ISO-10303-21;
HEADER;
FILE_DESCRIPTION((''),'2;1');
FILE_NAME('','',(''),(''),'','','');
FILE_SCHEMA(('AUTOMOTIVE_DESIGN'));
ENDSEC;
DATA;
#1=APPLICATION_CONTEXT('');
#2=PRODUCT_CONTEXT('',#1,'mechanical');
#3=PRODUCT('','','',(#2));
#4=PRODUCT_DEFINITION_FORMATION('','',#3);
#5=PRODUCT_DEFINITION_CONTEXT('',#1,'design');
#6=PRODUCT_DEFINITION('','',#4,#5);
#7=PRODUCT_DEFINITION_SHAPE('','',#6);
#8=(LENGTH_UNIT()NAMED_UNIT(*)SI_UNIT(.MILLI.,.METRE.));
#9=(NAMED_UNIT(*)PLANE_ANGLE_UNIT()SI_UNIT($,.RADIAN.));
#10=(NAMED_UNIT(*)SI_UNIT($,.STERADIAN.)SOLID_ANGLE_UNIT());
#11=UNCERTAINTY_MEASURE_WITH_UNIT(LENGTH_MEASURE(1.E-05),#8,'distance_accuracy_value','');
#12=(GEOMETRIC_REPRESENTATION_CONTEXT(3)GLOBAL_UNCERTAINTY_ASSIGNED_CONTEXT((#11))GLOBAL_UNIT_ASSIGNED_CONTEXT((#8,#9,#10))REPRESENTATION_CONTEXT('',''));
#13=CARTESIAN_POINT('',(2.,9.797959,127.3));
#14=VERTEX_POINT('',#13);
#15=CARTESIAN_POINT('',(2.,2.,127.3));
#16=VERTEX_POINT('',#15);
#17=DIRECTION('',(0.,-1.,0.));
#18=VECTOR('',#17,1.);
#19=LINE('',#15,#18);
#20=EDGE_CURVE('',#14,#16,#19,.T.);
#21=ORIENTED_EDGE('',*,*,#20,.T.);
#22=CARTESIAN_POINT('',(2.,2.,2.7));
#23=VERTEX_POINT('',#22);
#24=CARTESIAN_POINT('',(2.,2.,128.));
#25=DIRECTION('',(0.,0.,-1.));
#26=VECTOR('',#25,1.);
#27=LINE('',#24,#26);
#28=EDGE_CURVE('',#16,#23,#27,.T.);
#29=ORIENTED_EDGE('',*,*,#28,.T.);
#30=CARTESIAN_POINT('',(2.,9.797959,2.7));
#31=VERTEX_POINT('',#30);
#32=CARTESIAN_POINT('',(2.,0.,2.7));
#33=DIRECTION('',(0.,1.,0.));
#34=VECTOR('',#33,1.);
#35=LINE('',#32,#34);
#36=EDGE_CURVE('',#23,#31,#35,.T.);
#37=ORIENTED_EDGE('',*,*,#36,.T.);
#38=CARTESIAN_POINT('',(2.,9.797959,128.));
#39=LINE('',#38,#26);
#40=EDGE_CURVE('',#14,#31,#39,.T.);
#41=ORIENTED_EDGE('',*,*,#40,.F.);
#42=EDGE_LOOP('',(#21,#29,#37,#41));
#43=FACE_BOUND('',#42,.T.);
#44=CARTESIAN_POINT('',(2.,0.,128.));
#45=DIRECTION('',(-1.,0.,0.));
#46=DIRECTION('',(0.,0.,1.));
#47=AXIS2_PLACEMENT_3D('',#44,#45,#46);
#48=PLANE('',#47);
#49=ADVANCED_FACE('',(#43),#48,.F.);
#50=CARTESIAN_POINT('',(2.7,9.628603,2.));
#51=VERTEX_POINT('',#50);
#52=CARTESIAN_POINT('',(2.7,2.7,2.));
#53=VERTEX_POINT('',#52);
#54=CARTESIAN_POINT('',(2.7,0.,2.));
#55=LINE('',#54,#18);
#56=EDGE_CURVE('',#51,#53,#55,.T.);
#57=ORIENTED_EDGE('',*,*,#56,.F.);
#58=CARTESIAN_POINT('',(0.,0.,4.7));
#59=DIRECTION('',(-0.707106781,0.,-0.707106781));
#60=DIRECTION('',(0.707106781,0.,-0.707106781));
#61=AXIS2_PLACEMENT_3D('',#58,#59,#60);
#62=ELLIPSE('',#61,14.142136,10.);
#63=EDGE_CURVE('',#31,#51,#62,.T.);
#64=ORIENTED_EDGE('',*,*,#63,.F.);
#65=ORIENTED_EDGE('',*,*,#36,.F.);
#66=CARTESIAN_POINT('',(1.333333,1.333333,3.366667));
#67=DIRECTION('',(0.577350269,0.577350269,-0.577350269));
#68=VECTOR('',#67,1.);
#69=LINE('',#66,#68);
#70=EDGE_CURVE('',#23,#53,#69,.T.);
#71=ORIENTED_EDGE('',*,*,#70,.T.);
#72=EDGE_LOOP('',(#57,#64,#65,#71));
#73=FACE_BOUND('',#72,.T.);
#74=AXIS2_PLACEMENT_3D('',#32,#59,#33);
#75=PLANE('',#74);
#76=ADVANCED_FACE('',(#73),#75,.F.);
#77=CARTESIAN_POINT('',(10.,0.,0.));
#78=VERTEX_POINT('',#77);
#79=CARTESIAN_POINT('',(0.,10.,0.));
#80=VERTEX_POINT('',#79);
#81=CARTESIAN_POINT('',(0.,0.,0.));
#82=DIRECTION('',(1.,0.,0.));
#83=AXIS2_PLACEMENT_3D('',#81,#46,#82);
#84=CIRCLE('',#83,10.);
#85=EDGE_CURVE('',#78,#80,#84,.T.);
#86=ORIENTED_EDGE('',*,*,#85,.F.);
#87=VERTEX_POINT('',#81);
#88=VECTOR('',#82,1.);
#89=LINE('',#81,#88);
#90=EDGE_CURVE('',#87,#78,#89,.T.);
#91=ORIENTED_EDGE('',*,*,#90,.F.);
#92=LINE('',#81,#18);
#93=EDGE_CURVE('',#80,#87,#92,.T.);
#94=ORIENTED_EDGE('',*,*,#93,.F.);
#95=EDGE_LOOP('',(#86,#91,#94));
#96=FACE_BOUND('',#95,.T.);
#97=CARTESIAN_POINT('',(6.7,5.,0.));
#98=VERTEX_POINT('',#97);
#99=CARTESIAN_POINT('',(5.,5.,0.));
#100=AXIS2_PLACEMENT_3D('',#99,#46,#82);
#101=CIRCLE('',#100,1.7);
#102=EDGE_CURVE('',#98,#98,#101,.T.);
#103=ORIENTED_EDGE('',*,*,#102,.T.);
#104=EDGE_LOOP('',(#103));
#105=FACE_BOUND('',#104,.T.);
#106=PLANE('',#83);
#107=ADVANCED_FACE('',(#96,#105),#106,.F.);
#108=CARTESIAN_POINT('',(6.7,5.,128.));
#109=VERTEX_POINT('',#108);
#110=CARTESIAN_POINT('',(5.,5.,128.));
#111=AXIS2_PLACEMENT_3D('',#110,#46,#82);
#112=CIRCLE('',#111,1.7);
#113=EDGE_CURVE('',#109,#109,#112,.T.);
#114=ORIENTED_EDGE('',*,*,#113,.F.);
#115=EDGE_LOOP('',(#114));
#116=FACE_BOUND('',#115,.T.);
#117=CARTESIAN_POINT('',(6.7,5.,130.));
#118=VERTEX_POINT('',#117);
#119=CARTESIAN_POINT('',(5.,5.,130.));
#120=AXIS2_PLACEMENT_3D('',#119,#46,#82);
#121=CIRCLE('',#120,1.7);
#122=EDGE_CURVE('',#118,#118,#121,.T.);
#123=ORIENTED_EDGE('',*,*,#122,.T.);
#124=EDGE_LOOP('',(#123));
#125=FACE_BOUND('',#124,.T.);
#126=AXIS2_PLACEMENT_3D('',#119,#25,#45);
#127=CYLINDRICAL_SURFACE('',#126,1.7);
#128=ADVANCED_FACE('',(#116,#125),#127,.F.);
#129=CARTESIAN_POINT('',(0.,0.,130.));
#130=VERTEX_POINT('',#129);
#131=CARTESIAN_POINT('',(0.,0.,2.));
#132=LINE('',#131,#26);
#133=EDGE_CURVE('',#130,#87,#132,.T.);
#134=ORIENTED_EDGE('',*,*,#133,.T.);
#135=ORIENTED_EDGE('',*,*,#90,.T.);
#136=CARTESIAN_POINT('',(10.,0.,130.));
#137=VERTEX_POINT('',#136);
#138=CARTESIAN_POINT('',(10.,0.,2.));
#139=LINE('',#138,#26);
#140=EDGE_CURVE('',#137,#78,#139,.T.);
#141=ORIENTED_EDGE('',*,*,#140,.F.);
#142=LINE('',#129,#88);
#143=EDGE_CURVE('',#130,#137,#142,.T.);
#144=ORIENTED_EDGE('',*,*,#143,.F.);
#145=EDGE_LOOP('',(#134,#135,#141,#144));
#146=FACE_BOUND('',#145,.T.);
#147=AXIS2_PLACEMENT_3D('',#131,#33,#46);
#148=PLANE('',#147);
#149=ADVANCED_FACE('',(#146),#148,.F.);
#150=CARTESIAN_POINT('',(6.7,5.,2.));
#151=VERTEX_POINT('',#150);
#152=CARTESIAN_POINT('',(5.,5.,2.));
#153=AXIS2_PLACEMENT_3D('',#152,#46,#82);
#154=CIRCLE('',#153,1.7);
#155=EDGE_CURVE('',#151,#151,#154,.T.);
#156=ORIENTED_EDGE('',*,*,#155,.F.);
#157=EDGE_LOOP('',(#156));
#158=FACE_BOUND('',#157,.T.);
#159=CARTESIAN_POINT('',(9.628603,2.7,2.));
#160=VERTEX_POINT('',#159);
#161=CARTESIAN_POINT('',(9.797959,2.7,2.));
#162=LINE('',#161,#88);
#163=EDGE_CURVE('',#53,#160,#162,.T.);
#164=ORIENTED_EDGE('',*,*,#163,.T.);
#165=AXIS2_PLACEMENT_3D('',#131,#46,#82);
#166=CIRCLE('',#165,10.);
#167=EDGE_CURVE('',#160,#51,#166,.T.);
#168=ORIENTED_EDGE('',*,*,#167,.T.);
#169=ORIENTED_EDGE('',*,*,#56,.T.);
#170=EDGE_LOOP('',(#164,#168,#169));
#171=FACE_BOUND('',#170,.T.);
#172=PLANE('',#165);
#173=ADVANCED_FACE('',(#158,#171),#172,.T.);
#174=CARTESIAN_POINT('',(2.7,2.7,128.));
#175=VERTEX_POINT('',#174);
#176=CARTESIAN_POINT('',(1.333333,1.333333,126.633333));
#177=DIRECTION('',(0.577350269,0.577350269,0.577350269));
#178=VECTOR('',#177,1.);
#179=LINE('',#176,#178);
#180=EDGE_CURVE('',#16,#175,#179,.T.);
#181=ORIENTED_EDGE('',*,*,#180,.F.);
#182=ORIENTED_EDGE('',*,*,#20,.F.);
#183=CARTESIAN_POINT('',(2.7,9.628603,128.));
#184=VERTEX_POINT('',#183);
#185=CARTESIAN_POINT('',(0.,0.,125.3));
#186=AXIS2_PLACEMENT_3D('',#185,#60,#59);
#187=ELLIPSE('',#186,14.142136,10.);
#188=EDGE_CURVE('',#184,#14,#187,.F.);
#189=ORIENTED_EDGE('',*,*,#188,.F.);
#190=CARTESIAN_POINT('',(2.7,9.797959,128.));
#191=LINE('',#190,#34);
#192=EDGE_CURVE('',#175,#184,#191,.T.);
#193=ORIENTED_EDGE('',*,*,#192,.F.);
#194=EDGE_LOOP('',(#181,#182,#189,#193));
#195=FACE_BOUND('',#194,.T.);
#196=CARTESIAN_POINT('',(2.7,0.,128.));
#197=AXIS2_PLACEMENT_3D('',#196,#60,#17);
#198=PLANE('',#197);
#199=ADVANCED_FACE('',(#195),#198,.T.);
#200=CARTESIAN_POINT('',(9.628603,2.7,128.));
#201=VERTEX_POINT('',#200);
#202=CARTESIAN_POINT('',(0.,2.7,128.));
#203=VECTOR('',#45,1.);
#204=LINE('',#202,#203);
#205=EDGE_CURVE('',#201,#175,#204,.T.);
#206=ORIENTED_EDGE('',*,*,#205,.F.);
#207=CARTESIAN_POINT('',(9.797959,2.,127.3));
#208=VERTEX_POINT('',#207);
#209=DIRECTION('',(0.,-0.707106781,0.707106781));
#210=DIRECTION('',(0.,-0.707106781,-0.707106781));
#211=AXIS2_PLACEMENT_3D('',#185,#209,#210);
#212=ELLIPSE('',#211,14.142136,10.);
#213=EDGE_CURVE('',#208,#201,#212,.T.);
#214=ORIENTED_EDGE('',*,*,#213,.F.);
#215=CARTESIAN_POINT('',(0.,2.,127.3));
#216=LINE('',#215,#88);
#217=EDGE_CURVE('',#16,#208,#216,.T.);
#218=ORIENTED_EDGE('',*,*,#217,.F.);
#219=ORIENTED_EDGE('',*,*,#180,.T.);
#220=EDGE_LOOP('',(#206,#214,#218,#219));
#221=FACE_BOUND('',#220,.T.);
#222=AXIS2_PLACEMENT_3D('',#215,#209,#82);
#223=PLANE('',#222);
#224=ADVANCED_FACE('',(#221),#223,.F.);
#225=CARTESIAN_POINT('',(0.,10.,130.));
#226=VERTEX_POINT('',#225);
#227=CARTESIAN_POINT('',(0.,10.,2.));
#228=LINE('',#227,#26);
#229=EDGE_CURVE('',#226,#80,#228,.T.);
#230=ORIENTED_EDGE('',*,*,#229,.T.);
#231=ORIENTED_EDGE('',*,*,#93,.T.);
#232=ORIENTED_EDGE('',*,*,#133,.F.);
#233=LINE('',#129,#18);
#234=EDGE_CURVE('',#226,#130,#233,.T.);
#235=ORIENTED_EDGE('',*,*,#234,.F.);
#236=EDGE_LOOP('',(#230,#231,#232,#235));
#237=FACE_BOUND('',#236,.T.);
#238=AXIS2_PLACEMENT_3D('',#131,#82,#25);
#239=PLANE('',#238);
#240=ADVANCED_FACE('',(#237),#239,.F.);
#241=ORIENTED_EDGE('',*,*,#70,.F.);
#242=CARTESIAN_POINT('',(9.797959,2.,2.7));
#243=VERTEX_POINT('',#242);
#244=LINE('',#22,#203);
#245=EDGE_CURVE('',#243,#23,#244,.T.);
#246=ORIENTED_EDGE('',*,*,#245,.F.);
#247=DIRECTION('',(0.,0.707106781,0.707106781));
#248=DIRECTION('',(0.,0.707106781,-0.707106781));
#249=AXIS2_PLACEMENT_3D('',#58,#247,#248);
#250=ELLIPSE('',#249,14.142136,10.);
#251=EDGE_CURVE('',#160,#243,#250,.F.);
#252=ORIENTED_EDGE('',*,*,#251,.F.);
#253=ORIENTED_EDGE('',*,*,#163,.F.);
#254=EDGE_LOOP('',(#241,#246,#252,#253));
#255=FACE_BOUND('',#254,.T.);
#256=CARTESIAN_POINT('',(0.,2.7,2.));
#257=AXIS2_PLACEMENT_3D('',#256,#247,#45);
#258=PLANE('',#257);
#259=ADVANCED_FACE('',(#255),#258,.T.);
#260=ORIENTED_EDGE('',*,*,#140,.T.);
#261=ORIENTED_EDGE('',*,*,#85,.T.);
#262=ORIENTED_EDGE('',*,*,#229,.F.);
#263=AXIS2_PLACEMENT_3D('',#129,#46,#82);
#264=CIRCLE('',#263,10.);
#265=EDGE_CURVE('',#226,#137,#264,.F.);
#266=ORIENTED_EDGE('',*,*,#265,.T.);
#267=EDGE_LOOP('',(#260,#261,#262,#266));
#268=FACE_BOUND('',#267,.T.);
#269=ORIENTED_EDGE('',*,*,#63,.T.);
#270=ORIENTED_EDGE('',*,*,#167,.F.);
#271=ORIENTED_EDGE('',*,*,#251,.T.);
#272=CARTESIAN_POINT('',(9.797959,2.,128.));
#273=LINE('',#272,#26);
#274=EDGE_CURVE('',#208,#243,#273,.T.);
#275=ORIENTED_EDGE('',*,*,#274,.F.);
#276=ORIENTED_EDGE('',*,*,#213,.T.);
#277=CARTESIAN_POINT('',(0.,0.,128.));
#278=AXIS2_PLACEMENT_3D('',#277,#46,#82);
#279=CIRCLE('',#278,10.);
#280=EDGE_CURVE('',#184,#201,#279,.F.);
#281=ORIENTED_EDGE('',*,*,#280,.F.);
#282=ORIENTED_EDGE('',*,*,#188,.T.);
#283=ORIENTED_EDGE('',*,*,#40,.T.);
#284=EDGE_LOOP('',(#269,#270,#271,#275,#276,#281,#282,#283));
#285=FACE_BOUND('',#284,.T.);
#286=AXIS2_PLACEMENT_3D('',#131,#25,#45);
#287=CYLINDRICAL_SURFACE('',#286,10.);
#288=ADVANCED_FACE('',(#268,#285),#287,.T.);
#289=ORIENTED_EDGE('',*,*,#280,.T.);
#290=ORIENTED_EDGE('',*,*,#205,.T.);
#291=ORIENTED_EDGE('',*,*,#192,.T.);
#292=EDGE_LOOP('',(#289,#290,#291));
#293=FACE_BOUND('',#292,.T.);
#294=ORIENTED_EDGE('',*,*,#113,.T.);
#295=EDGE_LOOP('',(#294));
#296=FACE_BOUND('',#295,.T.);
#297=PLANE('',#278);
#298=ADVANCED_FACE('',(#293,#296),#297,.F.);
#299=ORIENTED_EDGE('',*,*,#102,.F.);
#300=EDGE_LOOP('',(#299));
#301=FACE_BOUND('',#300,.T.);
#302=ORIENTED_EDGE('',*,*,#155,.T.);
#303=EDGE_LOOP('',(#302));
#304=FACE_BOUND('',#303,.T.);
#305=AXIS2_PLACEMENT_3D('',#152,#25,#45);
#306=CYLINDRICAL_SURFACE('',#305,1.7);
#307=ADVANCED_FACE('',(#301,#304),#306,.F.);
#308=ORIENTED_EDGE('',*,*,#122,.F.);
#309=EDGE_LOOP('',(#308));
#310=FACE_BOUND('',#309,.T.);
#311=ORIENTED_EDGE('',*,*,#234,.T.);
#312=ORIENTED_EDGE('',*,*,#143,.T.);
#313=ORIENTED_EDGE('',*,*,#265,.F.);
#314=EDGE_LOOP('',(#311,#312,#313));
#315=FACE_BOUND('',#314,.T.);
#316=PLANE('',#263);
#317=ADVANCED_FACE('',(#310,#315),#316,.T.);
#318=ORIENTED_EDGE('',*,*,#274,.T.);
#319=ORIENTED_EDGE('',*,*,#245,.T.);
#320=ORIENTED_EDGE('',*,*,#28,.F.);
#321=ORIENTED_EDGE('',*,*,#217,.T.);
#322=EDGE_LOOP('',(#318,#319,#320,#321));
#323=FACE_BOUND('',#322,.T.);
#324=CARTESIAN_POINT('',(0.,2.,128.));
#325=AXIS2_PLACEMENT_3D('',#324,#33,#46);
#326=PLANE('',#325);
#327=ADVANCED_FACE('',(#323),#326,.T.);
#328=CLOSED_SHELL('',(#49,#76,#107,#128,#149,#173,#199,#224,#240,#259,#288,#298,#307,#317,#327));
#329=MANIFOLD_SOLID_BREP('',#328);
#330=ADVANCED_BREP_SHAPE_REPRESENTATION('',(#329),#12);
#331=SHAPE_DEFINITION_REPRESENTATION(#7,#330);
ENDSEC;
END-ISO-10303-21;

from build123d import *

# Parameters (mm, degrees)
SKETCH1_R           = 1.7
BOSS_EXTRUDE1_DEPTH = 2
SKETCH2_W           = 2
SKETCH2_H           = 2
BOSS_EXTRUDE2_DEPTH = 126
SKETCH3_R           = 1.7
BOSS_EXTRUDE3_DEPTH = 2
CHAMFER1_SIZE       = 0.7


with BuildPart() as part:
    # Sketch1 → Boss-Extrude1 (new body)
    with BuildSketch(Plane.XY):
        with BuildLine():
            Line((0, 0), (0, 10))
            ThreePointArc((0, 10), (7.071067812, 7.071067812), (10, 0))
            Line((10, 0), (0, 0))
        make_face()
        with Locations((5, 5)):
            Circle(SKETCH1_R, mode=Mode.SUBTRACT)
    extrude(amount=BOSS_EXTRUDE1_DEPTH)

    # Sketch2 → Boss-Extrude2 (add)
    with BuildSketch(Plane.XY.offset(2)):
        with Locations((1, 1)):
            Rectangle(SKETCH2_W, SKETCH2_H)
        with BuildLine():
            Line((0, 10), (0, 2))
            Line((0, 2), (2, 2))
            Line((2, 2), (2, 9.797958971))
            ThreePointArc((2, 9.797958971), (1.00508962, 9.94936153), (0, 10))
        make_face()
        with BuildLine():
            Line((2, 2), (2, 0))
            Line((2, 0), (10, 0))
            ThreePointArc((10, 0), (9.94936153, 1.00508962), (9.797958971, 2))
            Line((9.797958971, 2), (2, 2))
        make_face()
    extrude(amount=BOSS_EXTRUDE2_DEPTH)

    # Sketch3 → Boss-Extrude3 (add)
    # profile 1 of 2: a face of its own
    with BuildSketch(Plane.XY.offset(128)):
        with BuildLine():
            ThreePointArc((9.797958971, 2), (7.071067812, 7.071067812), (2, 9.797958971))
            Line((2, 9.797958971), (2, 2))
            Line((2, 2), (9.797958971, 2))
        make_face()
        with Locations((5, 5)):
            Circle(SKETCH3_R, mode=Mode.SUBTRACT)
    # profile 2 of 2: a face of its own
    with BuildSketch(Plane.XY.offset(128)):
        with BuildLine():
            ThreePointArc((10, 0), (9.94936153, 1.00508962), (9.797958971, 2))
            Line((9.797958971, 2), (2, 2))
            Line((2, 2), (2, 9.797958971))
            ThreePointArc((2, 9.797958971), (1.00508962, 9.94936153), (0, 10))
            Line((0, 10), (0, 0))
            Line((0, 0), (10, 0))
        make_face()
    extrude(amount=BOSS_EXTRUDE3_DEPTH)

    # Chamfer1
    # the kernel refuses this chamfer: 0.7 mm, written as the material it adds along each edge
    with BuildSketch(Plane(origin=(11.598137063, 2, 128), x_dir=(0, -0.027495876610586324, -0.9996219169112966), z_dir=(-1, 0, 0))) as chamfer1_piece_1_section:
        Polygon((CHAMFER1_SIZE * 0.999621916911, -CHAMFER1_SIZE * 0.0274958766106), (-CHAMFER1_SIZE * 0.0274958766106, -CHAMFER1_SIZE * 0.999621916911), (0, 0), align=None)
    chamfer1_piece_1 = extrude(amount=11.398315154, mode=Mode.PRIVATE)
    chamfer1_piece_1 = chamfer1_piece_1 & Plane(origin=(0, 0, 127.768642056), x_dir=(0, 1, 0), z_dir=(0, 0, -1)) * Cylinder(10, 26, mode=Mode.PRIVATE)
    add(chamfer1_piece_1)
    with BuildSketch(Plane(origin=(2, 11.598137063, 2), x_dir=(0.9996219169112968, 0, -0.027495876610586445), z_dir=(0, -1, 0))) as chamfer1_piece_2_section:
        Polygon((CHAMFER1_SIZE * 0.999621916911, CHAMFER1_SIZE * 0.0274958766106), (-CHAMFER1_SIZE * 0.0274958766106, CHAMFER1_SIZE * 0.999621916911), (0, 0), align=None)
    chamfer1_piece_2 = extrude(amount=11.398315154, mode=Mode.PRIVATE)
    chamfer1_piece_2 = chamfer1_piece_2 & Plane(origin=(0, 0, 2.231357944), x_dir=(0, 1, 0), z_dir=(0, 0, -1)) * Cylinder(10, 26, mode=Mode.PRIVATE)
    add(chamfer1_piece_2)
    with BuildSketch(Plane(origin=(2, 0.199821908, 128), x_dir=(0.9996219169112962, 0, 0.027495876610605856), z_dir=(0, 1, 0))) as chamfer1_piece_3_section:
        Polygon((CHAMFER1_SIZE * 0.999621916911, CHAMFER1_SIZE * 0.0274958766106), (-CHAMFER1_SIZE * 0.0274958766106, CHAMFER1_SIZE * 0.999621916911), (0, 0), align=None)
    chamfer1_piece_3 = extrude(amount=11.398315154, mode=Mode.PRIVATE)
    chamfer1_piece_3 = chamfer1_piece_3 & Plane(origin=(0, 0, 127.769144461), x_dir=(0, 1, 0), z_dir=(0, 0, -1)) * Cylinder(10, 26, mode=Mode.PRIVATE)
    add(chamfer1_piece_3)
    with BuildSketch(Plane(origin=(11.598137063, 2, 2), x_dir=(0, 0.9996219169112968, -0.027495876610586445), z_dir=(-1, 0, 0))) as chamfer1_piece_4_section:
        Polygon((CHAMFER1_SIZE * 0.999621916911, -CHAMFER1_SIZE * 0.0274958766106), (-CHAMFER1_SIZE * 0.0274958766106, -CHAMFER1_SIZE * 0.999621916911), (0, 0), align=None)
    chamfer1_piece_4 = extrude(amount=11.398315154, mode=Mode.PRIVATE)
    chamfer1_piece_4 = chamfer1_piece_4 & Plane(origin=(0, 0, 2.231357944), x_dir=(0, 1, 0), z_dir=(0, 0, -1)) * Cylinder(10, 26, mode=Mode.PRIVATE)
    add(chamfer1_piece_4)


solid = part.part
